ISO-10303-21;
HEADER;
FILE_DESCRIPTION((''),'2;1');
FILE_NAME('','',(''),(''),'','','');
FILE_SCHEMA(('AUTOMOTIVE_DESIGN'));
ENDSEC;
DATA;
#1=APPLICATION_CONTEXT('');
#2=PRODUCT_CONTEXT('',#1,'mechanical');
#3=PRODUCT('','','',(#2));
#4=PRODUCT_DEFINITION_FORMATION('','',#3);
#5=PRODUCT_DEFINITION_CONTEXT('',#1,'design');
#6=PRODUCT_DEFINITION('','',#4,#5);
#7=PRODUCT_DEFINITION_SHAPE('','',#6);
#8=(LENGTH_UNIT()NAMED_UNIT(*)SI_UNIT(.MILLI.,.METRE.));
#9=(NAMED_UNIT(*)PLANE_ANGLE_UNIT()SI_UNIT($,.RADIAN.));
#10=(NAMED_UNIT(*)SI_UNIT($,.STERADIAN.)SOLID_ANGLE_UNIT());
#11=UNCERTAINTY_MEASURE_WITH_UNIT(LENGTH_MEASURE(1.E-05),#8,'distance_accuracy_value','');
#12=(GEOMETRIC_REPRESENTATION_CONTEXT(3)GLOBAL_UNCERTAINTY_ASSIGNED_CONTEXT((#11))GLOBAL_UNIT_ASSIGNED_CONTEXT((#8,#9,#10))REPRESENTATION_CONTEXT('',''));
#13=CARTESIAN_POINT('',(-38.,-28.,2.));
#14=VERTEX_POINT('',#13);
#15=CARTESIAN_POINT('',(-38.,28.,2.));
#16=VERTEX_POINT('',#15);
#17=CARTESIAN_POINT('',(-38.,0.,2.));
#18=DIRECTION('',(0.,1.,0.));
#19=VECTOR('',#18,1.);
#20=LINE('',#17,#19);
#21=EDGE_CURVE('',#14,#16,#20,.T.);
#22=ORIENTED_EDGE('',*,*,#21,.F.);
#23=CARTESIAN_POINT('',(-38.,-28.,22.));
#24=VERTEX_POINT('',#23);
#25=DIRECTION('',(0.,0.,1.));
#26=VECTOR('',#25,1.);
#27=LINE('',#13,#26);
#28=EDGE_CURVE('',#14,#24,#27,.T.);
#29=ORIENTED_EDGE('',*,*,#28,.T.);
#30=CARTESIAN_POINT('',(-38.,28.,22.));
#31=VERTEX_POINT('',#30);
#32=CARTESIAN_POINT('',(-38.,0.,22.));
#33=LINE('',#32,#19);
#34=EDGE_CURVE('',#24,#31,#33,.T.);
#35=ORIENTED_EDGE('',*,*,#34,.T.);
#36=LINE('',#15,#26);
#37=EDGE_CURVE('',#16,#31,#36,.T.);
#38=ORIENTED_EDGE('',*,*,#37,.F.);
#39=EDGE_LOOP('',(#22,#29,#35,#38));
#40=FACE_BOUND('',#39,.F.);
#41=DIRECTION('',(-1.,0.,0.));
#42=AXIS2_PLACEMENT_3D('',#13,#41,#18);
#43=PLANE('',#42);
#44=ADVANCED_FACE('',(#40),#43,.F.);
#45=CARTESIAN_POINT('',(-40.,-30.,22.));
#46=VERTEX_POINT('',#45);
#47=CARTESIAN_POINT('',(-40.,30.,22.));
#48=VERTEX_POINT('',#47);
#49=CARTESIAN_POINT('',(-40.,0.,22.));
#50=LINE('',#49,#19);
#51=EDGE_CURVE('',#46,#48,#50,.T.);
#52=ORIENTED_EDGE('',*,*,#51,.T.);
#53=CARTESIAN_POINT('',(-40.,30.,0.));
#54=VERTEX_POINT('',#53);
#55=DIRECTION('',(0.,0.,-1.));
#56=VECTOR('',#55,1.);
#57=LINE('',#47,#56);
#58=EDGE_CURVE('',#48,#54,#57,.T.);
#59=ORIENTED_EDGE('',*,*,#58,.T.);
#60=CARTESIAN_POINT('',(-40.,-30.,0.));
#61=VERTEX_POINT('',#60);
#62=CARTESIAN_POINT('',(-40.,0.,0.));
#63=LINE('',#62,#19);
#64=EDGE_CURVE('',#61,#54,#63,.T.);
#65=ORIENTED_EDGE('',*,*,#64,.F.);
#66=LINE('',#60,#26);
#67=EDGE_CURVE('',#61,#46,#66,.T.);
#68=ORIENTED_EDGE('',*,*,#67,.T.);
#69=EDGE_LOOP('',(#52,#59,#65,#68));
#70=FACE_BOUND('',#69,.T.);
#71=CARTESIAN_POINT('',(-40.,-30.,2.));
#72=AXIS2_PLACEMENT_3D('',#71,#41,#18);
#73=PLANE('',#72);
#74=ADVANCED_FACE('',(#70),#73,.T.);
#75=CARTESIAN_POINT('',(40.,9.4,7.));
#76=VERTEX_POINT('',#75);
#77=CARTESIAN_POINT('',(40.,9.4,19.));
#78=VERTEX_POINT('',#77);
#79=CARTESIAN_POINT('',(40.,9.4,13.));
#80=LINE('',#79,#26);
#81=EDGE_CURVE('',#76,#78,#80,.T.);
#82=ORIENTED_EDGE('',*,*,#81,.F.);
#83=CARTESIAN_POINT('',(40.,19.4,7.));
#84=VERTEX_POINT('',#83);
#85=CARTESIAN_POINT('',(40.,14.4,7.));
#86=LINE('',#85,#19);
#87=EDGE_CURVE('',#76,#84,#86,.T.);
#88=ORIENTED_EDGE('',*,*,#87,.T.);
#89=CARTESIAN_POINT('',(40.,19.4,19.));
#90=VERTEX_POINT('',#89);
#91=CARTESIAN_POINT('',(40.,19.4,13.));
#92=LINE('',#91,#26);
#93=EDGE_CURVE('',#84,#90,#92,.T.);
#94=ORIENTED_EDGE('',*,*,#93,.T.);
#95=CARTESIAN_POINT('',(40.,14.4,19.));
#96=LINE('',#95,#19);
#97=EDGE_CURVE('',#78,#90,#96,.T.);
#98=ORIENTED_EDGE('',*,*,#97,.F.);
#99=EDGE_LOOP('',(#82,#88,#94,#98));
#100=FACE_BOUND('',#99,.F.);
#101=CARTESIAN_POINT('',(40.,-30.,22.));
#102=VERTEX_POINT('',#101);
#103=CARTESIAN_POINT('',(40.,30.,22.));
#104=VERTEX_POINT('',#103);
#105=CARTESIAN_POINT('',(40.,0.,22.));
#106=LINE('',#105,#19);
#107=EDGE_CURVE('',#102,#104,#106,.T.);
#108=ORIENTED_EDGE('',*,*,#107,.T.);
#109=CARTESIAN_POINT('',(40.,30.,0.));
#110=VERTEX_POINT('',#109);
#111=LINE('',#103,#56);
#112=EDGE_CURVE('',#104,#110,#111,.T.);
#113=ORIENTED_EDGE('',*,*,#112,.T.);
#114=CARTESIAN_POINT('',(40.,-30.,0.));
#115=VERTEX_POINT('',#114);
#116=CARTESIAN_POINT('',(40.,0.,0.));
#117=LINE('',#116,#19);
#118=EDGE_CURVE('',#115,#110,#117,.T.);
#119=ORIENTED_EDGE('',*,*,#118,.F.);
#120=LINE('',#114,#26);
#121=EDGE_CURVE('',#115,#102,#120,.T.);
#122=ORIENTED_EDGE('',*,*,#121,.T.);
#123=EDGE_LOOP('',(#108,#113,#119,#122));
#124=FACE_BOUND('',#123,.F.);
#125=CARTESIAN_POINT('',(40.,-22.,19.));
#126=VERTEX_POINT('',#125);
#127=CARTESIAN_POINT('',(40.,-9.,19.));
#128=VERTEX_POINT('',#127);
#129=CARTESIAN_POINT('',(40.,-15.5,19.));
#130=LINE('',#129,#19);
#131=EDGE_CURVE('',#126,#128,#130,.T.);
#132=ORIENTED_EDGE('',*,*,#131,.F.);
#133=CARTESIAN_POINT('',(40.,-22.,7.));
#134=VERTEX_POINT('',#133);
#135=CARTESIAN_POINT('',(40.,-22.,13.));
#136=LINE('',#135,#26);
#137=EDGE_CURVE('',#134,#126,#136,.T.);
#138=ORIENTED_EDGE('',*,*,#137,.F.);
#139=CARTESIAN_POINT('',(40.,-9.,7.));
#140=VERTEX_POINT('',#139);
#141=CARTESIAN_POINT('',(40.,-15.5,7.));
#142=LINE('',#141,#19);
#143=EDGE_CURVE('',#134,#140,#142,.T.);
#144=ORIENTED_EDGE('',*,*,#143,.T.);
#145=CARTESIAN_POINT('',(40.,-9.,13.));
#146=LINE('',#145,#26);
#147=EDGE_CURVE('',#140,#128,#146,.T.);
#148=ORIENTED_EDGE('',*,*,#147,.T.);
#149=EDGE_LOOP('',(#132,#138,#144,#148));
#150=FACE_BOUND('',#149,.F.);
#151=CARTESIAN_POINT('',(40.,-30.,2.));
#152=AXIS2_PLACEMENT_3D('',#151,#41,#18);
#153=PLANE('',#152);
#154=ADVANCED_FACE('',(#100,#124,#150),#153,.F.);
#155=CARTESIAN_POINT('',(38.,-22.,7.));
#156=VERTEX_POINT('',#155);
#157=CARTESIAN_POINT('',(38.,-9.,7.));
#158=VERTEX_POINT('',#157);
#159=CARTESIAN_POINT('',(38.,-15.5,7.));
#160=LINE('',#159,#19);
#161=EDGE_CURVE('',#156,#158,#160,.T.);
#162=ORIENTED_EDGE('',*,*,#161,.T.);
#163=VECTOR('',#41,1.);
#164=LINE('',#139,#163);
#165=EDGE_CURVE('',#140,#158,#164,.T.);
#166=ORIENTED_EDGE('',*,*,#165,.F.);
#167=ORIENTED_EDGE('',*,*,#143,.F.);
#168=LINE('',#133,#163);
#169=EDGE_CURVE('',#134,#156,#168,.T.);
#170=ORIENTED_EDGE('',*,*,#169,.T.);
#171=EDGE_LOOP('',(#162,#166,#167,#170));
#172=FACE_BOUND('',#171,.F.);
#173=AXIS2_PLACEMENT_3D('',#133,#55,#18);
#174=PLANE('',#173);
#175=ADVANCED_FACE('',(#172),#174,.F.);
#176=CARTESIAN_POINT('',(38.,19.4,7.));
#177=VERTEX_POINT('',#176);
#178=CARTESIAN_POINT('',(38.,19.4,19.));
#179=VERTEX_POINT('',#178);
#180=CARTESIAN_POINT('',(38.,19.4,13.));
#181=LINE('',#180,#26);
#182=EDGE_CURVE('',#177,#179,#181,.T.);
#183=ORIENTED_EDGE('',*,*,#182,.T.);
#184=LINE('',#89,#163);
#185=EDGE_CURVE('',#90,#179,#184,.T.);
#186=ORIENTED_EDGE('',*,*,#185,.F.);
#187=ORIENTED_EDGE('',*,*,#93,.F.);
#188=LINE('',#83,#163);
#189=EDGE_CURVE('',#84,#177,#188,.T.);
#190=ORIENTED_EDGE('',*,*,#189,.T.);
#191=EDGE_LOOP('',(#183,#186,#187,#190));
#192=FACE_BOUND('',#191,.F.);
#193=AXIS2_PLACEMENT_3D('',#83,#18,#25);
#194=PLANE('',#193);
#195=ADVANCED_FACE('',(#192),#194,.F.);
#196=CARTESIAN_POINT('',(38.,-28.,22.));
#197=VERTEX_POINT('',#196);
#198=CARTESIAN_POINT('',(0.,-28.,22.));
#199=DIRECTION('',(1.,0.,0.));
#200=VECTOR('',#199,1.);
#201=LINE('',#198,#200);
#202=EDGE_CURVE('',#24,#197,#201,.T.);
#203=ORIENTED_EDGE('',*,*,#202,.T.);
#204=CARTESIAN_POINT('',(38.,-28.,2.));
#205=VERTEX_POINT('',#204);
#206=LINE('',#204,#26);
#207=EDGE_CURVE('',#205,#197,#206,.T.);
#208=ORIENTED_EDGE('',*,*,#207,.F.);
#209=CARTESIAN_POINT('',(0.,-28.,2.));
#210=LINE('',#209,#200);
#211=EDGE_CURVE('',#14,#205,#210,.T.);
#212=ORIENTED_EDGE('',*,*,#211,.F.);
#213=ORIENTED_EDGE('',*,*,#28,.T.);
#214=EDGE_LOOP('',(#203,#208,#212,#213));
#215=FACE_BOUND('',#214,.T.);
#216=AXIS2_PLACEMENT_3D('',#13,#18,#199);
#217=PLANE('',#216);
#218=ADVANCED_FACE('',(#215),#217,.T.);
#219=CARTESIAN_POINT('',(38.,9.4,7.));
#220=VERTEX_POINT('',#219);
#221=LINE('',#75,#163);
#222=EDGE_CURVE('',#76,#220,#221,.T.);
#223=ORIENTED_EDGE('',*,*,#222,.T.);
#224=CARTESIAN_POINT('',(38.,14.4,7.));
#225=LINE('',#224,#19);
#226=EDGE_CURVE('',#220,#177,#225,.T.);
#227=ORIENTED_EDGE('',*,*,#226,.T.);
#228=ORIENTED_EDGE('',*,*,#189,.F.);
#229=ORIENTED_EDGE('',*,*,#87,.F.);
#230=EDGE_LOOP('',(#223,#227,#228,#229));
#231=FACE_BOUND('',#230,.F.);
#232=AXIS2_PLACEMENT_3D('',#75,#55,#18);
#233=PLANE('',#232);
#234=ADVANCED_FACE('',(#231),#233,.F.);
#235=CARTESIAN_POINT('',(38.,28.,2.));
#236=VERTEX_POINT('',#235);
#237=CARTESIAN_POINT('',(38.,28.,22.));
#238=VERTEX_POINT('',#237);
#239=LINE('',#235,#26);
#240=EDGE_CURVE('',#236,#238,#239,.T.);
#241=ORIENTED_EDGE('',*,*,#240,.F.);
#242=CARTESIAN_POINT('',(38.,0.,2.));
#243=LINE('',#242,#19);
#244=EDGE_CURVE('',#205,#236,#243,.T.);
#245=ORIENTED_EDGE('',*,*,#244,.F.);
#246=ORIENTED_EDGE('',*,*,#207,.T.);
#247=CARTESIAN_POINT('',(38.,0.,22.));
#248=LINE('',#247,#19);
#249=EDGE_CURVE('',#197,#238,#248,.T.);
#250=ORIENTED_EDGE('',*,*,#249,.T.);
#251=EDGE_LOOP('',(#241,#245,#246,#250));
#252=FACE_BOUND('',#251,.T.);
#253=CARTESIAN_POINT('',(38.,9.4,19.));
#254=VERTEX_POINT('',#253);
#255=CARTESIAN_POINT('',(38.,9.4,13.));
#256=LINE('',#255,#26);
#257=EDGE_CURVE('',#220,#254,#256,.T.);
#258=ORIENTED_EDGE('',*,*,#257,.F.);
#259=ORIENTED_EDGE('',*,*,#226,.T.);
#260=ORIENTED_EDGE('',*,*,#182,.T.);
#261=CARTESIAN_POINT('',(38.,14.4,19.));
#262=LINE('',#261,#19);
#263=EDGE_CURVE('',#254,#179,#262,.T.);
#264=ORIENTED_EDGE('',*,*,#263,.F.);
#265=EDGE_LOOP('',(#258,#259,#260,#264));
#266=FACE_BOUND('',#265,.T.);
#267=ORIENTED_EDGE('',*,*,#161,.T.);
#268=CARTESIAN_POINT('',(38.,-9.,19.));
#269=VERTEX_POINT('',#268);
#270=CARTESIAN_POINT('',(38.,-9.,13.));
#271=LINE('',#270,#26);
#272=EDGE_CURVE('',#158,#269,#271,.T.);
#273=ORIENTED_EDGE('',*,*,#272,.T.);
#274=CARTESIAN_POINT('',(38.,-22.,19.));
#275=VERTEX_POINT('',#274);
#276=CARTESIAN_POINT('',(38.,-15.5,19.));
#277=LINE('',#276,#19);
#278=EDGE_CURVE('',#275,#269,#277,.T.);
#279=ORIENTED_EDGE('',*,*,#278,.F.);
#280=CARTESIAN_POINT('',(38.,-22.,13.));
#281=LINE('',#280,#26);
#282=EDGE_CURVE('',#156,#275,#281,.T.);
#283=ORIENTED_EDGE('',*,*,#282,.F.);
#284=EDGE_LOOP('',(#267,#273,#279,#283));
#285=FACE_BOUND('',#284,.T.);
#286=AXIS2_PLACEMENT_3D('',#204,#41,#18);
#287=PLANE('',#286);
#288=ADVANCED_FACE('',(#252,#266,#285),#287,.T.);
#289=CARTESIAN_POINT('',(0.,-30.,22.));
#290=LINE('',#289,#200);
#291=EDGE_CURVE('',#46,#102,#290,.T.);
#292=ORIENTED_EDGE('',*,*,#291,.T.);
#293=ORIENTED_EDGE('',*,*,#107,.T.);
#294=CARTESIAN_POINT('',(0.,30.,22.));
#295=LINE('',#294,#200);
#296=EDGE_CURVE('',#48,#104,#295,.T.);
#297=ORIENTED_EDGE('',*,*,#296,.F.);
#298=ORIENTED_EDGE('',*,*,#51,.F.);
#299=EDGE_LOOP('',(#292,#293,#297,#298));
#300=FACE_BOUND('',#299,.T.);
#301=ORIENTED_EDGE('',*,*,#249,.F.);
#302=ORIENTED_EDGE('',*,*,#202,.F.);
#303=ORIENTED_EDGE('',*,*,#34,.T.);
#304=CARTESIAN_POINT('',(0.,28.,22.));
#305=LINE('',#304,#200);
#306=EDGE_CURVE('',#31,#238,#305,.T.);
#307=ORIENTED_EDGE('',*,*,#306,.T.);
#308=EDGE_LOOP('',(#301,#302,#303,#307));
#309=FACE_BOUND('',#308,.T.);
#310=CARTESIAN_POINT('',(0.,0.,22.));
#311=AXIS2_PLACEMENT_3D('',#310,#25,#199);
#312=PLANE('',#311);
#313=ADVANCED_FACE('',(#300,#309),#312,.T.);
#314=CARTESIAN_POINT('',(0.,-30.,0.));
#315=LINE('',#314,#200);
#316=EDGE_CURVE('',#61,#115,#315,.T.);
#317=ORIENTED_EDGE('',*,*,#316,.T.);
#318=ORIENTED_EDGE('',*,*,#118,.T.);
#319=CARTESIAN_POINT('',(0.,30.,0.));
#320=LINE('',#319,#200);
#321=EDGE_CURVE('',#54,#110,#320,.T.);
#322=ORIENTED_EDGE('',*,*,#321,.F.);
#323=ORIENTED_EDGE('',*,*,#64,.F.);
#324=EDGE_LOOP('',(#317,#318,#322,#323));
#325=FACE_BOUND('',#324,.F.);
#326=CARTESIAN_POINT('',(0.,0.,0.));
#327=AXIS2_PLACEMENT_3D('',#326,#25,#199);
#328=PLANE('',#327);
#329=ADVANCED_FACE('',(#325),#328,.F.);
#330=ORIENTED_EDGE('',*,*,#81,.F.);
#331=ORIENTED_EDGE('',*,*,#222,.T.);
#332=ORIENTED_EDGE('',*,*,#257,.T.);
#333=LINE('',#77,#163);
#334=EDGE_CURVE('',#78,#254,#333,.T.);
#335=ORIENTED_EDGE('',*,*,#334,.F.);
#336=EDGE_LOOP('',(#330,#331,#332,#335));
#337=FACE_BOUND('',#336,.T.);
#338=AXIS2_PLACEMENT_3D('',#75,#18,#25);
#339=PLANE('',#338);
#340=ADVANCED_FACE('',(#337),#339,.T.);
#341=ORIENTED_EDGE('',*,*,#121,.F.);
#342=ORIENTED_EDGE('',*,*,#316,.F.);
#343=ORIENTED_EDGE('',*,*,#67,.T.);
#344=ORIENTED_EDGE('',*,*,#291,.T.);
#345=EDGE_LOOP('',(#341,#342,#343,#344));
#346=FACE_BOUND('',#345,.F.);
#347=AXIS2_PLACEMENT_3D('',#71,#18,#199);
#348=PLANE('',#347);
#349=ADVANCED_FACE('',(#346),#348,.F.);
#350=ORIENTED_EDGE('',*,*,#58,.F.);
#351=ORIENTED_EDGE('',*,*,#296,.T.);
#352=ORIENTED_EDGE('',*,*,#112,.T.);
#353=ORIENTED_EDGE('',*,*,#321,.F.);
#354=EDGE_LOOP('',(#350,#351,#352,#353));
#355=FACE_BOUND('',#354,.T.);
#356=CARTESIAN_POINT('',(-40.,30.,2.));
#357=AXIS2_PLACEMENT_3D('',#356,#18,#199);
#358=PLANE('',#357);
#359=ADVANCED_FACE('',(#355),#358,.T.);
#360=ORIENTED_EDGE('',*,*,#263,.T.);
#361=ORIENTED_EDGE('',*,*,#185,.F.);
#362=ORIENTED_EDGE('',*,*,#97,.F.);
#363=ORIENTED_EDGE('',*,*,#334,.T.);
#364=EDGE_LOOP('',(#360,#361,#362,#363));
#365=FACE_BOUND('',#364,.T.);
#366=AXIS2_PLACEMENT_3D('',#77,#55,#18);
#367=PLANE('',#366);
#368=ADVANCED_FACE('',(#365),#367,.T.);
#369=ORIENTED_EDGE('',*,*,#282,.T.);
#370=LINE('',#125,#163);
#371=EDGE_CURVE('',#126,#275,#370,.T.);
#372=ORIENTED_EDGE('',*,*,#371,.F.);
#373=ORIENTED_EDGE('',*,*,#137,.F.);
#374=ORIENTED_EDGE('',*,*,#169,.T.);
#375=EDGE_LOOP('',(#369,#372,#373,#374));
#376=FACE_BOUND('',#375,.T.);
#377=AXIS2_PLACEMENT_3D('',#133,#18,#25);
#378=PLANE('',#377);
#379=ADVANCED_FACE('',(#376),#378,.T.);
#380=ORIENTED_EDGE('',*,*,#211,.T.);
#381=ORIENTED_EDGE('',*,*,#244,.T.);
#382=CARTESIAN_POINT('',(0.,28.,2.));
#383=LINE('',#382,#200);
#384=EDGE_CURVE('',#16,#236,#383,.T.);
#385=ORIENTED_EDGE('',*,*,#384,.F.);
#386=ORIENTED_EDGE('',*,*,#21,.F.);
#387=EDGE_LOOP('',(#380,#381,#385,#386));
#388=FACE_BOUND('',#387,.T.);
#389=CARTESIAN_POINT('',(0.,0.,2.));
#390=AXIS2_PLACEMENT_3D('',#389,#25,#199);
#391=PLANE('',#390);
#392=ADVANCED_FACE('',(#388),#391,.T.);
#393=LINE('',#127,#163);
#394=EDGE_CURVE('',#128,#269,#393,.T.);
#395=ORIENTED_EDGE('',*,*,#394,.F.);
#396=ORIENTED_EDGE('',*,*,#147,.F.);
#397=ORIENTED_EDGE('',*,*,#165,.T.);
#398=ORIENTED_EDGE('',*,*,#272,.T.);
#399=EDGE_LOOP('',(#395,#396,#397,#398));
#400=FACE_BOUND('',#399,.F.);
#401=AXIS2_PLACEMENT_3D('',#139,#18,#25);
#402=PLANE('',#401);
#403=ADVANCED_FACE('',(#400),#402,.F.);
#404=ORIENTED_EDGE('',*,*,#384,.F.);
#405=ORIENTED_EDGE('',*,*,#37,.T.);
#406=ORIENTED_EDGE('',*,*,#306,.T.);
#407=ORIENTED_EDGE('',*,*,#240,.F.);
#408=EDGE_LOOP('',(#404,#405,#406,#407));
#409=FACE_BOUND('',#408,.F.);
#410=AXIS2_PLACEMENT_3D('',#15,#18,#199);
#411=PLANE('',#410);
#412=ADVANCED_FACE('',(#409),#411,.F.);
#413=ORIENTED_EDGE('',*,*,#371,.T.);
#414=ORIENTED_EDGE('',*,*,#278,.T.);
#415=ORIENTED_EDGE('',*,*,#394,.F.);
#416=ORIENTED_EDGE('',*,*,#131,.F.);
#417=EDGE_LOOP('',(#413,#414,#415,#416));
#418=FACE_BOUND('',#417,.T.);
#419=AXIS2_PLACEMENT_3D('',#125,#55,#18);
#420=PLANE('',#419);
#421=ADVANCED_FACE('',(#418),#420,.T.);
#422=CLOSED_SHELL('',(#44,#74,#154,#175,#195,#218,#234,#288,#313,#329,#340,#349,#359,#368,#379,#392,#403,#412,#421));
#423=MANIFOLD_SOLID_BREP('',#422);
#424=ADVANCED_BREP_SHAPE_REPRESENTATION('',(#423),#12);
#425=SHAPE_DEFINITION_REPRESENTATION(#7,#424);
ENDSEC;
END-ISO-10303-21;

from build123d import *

# Parameters (mm, degrees)
F0_W     = 80
F0_H     = 60
F1_DEPTH = 2
F2_W     = 80
F2_H     = 60
F2_W_2   = 76
F2_H_2   = 56
F3_DEPTH = 20
F4_W     = 13
F4_H     = 12
F4_W_2   = 10
F5_DEPTH = 2


# Not quite as in the source:
# - the program builds the solid bodies; features that only make, move or delete a surface that nothing else refers to are left out


with BuildPart() as f1:
    # F0 (on Top) → F1 (new body)
    with BuildSketch(Plane.XY):
        Rectangle(F0_W, F0_H)
    extrude(amount=F1_DEPTH)

    # F2 (on face) → F3 (join)
    with BuildSketch(Plane.XY.offset(2)):
        Rectangle(F2_W, F2_H)
        Rectangle(F2_W_2, F2_H_2, mode=Mode.SUBTRACT)
    extrude(amount=F3_DEPTH)

    # F4 (on face) → F5 (cut)
    with BuildSketch(Plane.YZ.offset(40)):
        with Locations((-15.5, 13)):
            Rectangle(F4_W, F4_H)
        with Locations((14.4, 13)):
            Rectangle(F4_W_2, F4_H)
    extrude(amount=-F5_DEPTH, mode=Mode.SUBTRACT)


solid = f1.part
